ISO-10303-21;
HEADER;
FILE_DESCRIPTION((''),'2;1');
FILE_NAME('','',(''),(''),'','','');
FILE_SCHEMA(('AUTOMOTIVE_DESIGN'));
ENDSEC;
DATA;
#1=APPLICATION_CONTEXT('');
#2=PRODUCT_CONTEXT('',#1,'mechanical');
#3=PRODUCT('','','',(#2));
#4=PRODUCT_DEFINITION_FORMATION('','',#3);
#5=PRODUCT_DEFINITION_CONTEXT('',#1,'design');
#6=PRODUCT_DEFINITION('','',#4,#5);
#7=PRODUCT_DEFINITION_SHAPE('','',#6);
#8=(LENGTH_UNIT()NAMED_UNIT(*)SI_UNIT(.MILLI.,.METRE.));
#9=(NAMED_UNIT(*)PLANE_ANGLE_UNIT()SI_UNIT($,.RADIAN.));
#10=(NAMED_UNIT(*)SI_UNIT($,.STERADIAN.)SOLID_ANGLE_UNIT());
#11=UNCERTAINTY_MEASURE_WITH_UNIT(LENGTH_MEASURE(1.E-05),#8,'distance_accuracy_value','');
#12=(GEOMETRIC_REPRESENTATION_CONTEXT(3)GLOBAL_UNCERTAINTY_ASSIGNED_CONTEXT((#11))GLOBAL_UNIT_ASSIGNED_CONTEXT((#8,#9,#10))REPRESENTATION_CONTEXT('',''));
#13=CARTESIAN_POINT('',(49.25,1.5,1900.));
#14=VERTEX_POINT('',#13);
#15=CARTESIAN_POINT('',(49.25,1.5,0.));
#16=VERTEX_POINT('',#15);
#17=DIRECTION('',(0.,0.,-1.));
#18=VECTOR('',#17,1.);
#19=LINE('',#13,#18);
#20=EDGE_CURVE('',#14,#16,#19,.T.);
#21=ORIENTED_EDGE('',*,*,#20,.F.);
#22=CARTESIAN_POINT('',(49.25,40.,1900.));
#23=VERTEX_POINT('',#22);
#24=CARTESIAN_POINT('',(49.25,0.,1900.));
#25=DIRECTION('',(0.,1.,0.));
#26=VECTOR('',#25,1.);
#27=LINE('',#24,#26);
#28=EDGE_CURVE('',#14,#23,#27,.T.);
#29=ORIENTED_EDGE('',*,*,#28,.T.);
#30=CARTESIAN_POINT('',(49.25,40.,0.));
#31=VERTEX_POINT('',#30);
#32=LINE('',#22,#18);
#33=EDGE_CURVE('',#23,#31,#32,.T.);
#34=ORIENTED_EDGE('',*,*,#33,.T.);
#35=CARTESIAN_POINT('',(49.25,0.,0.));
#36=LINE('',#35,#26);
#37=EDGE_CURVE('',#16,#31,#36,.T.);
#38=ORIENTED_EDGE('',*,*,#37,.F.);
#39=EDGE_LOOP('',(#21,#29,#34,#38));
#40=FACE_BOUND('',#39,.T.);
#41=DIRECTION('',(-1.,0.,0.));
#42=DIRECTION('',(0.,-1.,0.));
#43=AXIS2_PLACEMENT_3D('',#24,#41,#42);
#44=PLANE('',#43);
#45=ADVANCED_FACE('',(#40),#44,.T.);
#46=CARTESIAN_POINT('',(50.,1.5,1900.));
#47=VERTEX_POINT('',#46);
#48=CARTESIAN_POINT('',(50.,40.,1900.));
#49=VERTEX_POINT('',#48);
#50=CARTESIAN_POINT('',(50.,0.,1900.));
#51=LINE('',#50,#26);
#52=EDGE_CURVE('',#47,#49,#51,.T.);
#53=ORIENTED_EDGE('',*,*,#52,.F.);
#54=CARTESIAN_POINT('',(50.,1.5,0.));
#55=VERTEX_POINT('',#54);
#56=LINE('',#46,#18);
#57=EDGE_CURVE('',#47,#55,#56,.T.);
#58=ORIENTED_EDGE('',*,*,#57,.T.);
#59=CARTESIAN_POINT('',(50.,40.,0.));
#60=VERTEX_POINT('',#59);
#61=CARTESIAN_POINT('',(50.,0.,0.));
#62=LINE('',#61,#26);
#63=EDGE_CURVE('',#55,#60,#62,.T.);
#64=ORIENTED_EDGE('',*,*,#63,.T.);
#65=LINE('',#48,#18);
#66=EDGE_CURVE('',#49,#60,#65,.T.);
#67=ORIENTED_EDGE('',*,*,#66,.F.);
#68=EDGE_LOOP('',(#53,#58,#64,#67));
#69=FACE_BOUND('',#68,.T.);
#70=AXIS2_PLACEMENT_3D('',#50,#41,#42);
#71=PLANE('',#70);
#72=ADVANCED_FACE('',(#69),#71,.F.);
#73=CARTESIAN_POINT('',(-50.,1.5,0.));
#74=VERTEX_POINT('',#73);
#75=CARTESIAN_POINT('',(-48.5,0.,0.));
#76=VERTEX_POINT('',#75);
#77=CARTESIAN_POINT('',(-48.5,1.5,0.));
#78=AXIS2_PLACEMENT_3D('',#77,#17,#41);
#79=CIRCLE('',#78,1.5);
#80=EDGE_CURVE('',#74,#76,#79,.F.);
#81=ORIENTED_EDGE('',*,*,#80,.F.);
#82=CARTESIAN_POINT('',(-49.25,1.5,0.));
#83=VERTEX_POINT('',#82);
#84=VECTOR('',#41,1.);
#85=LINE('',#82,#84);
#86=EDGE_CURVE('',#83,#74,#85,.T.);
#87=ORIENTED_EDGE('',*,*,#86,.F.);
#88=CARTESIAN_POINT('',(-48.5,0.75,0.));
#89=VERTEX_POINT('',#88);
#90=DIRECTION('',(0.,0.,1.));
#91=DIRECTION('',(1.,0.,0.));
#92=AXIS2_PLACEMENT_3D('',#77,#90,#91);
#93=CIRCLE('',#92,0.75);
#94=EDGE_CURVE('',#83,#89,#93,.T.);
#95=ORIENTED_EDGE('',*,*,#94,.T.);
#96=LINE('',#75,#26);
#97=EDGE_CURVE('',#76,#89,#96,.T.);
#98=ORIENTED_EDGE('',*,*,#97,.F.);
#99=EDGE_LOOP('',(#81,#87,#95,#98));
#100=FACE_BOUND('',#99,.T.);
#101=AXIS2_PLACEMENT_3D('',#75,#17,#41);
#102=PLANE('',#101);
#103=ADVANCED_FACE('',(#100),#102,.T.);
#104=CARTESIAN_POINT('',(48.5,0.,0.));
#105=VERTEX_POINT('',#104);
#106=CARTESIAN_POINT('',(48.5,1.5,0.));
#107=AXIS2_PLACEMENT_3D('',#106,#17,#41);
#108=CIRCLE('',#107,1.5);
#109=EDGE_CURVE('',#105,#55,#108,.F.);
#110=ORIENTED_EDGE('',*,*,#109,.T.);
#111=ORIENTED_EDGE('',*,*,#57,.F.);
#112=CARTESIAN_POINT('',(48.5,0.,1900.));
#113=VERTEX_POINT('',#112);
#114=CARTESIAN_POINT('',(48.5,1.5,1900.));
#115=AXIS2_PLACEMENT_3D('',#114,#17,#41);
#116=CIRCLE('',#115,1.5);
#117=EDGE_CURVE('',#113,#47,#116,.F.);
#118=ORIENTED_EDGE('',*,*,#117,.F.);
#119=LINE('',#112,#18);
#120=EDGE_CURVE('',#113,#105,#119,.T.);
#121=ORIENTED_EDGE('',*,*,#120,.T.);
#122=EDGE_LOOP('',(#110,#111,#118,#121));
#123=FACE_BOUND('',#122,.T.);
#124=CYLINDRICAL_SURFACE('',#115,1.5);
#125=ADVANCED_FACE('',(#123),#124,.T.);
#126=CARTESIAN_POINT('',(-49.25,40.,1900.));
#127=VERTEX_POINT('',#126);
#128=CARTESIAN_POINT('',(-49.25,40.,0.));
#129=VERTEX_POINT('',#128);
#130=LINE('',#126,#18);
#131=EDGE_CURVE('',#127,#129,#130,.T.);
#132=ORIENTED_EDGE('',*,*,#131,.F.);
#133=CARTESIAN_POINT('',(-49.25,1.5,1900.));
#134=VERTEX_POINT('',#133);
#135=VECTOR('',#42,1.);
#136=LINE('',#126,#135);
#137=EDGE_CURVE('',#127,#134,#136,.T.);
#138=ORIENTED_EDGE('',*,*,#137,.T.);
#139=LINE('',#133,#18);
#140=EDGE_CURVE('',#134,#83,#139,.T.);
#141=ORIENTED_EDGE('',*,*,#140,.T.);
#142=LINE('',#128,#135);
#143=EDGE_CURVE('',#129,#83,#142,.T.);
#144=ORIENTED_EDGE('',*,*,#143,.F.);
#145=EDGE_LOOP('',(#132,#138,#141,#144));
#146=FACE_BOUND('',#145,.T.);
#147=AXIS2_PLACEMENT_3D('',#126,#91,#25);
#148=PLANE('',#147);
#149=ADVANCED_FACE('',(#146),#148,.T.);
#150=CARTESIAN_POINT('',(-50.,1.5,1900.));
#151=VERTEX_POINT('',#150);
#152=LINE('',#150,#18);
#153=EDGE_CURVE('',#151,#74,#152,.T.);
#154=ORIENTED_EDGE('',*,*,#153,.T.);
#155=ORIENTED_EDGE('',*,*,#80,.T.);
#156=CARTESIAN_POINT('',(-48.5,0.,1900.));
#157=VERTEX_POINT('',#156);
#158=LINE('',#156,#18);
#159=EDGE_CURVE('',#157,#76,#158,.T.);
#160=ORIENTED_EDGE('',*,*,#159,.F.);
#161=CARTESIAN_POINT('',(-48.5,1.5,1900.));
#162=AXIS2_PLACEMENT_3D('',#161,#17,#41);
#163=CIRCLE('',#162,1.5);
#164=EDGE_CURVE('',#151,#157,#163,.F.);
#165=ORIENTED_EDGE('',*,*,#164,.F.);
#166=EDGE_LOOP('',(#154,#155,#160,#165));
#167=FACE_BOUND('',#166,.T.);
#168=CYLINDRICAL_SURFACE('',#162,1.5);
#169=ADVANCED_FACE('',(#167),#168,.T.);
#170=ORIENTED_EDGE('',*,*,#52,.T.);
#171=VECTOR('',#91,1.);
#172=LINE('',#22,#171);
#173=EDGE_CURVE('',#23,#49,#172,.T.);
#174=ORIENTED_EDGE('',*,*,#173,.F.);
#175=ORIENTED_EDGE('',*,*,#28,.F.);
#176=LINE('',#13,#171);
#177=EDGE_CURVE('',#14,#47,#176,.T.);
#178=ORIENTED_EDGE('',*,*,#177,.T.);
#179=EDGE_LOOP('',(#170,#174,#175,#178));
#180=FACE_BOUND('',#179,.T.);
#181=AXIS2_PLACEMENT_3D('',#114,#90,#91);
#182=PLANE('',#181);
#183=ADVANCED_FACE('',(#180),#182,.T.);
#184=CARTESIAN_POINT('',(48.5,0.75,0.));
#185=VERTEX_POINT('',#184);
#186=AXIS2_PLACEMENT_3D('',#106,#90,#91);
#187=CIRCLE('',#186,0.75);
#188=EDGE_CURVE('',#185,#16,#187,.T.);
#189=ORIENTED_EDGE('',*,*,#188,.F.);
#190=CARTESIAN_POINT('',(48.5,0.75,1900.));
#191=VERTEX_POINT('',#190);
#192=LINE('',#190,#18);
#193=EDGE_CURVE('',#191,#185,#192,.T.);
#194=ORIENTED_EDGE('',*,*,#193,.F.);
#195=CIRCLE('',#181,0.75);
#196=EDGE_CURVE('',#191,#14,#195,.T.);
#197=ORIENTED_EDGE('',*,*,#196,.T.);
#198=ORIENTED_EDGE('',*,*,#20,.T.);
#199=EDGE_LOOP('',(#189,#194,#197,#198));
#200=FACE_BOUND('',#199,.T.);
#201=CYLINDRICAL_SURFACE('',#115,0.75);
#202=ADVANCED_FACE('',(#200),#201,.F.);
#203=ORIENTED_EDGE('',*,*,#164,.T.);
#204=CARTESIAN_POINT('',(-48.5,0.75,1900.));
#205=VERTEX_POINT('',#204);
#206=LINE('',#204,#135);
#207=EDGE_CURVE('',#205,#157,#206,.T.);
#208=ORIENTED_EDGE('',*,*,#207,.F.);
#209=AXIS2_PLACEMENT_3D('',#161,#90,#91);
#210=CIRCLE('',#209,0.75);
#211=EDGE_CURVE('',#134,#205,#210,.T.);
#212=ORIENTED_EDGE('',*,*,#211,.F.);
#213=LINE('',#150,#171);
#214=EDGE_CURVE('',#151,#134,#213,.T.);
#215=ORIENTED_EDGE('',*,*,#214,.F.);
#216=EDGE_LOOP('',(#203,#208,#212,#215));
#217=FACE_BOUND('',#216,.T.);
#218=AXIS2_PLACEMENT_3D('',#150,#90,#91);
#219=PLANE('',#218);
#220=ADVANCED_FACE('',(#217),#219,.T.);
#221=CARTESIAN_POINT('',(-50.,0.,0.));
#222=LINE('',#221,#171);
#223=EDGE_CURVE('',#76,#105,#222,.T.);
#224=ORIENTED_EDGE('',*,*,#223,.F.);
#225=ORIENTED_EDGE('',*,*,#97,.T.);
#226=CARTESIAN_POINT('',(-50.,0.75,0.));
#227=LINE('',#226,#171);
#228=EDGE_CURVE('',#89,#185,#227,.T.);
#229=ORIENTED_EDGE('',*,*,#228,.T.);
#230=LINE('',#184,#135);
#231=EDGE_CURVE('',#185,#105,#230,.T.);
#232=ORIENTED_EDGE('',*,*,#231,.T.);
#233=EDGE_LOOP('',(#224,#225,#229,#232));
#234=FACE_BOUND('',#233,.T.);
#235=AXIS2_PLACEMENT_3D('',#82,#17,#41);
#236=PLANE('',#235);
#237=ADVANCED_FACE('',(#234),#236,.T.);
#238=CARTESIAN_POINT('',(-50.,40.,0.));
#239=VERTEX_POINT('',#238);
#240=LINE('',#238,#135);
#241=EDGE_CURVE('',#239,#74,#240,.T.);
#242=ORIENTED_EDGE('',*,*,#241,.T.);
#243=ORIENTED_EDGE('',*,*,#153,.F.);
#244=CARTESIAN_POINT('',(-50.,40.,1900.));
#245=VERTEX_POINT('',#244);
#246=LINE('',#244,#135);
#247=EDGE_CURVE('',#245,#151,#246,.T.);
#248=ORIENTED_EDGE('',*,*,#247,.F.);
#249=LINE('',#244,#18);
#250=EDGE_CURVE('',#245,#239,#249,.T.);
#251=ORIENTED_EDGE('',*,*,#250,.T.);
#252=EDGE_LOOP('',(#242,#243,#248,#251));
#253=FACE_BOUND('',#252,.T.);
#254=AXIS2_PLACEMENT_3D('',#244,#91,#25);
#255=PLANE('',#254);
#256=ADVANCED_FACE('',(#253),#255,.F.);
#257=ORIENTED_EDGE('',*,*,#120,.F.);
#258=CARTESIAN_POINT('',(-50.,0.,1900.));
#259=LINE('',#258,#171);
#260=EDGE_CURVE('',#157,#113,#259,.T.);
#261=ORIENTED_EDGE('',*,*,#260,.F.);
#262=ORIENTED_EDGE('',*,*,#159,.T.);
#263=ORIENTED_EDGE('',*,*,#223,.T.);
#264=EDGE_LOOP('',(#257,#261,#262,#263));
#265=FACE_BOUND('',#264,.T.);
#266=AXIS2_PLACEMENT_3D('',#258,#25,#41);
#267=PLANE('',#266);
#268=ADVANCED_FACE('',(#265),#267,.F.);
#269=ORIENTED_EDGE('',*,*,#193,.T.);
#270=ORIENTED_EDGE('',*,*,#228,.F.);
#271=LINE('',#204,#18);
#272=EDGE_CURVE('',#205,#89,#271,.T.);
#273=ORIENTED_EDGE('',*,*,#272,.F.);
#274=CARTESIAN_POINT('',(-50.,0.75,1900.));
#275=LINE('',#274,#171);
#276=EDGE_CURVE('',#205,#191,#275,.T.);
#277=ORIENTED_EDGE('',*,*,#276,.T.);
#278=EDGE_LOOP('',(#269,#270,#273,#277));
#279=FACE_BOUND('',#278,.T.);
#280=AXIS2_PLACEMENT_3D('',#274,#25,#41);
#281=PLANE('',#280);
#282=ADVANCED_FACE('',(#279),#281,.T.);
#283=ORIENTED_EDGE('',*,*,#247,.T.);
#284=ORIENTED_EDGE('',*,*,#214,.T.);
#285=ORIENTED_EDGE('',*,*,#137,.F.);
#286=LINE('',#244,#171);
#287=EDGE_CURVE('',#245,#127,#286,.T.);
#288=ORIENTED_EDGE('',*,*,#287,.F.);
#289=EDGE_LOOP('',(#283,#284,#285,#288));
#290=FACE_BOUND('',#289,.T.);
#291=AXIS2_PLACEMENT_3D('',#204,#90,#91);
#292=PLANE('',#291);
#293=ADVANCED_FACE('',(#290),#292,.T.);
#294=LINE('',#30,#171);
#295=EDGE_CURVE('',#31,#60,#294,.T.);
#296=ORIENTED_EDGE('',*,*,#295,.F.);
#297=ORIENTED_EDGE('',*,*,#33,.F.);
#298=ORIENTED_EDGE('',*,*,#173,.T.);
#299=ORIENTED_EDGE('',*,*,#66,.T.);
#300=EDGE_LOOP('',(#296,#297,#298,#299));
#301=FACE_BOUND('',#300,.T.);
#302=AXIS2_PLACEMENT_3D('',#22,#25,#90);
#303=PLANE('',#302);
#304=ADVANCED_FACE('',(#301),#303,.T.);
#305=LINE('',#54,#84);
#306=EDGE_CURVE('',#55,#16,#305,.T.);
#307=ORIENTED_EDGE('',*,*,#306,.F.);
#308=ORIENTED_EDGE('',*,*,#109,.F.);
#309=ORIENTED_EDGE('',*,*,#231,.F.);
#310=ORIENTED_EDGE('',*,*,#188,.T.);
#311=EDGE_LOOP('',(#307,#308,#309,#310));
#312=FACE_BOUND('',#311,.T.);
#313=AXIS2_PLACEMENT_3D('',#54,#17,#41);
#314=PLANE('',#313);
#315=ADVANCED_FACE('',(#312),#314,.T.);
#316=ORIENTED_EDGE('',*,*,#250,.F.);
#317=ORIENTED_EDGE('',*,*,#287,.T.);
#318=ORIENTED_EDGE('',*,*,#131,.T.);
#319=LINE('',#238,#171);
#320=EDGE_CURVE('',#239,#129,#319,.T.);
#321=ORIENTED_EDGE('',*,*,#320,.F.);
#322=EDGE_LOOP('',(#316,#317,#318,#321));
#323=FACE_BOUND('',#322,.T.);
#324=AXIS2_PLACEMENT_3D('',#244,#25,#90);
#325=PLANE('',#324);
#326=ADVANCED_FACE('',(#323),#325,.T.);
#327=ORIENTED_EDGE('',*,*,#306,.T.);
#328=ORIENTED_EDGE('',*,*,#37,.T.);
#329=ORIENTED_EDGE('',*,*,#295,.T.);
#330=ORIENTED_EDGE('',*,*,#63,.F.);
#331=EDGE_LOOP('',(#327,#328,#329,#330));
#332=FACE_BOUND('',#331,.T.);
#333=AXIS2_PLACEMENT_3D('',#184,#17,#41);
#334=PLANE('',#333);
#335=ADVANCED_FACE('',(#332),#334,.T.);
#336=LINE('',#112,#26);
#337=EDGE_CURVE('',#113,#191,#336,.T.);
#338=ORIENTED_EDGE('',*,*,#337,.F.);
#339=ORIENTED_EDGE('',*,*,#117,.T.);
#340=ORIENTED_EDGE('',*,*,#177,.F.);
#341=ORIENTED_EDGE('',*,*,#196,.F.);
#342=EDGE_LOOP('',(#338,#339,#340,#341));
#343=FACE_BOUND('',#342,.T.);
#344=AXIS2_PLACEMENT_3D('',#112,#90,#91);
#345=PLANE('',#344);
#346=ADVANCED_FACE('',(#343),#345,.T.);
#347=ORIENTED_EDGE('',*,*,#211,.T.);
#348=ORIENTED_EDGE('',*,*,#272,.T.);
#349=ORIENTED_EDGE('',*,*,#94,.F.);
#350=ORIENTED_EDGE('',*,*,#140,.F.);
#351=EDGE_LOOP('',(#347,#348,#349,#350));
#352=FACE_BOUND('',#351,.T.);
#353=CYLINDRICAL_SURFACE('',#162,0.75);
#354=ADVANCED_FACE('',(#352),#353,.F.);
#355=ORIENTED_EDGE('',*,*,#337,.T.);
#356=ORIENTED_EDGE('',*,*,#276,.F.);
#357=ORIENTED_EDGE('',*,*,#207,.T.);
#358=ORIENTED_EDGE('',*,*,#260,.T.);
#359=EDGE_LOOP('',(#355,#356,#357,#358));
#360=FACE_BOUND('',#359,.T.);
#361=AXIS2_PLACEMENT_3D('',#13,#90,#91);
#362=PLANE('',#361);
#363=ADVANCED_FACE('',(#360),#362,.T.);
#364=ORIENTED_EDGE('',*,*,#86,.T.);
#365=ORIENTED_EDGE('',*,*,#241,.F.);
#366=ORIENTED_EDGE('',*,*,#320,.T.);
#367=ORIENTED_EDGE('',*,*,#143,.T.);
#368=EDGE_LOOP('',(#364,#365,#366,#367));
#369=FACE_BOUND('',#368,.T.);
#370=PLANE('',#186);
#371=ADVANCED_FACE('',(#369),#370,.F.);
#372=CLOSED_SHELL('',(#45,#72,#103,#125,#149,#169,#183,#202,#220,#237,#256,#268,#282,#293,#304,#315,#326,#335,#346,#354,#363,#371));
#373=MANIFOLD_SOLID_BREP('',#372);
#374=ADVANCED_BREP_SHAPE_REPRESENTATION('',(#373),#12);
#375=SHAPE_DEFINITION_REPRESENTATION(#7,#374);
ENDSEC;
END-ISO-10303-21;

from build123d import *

# Parameters (mm, degrees)
SM_BASE_FLANGE_2_DEPTH = 1900


# Sheet-metal steps are written as plain solids
with BuildPart() as part:
    # Эскиз1 → Базовая кромка2 (new body)
    with BuildSketch(Plane.XY):
        with BuildLine():
            Line((-50, 40), (-50, 1.5))
            ThreePointArc((-50, 1.5), (-49.560660172, 0.439339828), (-48.5, 0))
            Line((-48.5, 0), (48.5, 0))
            ThreePointArc((48.5, 0), (49.560660172, 0.439339828), (50, 1.5))
            Line((50, 1.5), (50, 40))
            Line((50, 40), (49.25, 40))
            Line((49.25, 40), (49.25, 1.5))
            ThreePointArc((49.25, 1.5), (49.030330086, 0.969669914), (48.5, 0.75))
            Line((48.5, 0.75), (-48.5, 0.75))
            ThreePointArc((-48.5, 0.75), (-49.030330086, 0.969669914), (-49.25, 1.5))
            Line((-49.25, 1.5), (-49.25, 40))
            Line((-49.25, 40), (-50, 40))
        make_face()
    extrude(amount=SM_BASE_FLANGE_2_DEPTH)


solid = part.part
